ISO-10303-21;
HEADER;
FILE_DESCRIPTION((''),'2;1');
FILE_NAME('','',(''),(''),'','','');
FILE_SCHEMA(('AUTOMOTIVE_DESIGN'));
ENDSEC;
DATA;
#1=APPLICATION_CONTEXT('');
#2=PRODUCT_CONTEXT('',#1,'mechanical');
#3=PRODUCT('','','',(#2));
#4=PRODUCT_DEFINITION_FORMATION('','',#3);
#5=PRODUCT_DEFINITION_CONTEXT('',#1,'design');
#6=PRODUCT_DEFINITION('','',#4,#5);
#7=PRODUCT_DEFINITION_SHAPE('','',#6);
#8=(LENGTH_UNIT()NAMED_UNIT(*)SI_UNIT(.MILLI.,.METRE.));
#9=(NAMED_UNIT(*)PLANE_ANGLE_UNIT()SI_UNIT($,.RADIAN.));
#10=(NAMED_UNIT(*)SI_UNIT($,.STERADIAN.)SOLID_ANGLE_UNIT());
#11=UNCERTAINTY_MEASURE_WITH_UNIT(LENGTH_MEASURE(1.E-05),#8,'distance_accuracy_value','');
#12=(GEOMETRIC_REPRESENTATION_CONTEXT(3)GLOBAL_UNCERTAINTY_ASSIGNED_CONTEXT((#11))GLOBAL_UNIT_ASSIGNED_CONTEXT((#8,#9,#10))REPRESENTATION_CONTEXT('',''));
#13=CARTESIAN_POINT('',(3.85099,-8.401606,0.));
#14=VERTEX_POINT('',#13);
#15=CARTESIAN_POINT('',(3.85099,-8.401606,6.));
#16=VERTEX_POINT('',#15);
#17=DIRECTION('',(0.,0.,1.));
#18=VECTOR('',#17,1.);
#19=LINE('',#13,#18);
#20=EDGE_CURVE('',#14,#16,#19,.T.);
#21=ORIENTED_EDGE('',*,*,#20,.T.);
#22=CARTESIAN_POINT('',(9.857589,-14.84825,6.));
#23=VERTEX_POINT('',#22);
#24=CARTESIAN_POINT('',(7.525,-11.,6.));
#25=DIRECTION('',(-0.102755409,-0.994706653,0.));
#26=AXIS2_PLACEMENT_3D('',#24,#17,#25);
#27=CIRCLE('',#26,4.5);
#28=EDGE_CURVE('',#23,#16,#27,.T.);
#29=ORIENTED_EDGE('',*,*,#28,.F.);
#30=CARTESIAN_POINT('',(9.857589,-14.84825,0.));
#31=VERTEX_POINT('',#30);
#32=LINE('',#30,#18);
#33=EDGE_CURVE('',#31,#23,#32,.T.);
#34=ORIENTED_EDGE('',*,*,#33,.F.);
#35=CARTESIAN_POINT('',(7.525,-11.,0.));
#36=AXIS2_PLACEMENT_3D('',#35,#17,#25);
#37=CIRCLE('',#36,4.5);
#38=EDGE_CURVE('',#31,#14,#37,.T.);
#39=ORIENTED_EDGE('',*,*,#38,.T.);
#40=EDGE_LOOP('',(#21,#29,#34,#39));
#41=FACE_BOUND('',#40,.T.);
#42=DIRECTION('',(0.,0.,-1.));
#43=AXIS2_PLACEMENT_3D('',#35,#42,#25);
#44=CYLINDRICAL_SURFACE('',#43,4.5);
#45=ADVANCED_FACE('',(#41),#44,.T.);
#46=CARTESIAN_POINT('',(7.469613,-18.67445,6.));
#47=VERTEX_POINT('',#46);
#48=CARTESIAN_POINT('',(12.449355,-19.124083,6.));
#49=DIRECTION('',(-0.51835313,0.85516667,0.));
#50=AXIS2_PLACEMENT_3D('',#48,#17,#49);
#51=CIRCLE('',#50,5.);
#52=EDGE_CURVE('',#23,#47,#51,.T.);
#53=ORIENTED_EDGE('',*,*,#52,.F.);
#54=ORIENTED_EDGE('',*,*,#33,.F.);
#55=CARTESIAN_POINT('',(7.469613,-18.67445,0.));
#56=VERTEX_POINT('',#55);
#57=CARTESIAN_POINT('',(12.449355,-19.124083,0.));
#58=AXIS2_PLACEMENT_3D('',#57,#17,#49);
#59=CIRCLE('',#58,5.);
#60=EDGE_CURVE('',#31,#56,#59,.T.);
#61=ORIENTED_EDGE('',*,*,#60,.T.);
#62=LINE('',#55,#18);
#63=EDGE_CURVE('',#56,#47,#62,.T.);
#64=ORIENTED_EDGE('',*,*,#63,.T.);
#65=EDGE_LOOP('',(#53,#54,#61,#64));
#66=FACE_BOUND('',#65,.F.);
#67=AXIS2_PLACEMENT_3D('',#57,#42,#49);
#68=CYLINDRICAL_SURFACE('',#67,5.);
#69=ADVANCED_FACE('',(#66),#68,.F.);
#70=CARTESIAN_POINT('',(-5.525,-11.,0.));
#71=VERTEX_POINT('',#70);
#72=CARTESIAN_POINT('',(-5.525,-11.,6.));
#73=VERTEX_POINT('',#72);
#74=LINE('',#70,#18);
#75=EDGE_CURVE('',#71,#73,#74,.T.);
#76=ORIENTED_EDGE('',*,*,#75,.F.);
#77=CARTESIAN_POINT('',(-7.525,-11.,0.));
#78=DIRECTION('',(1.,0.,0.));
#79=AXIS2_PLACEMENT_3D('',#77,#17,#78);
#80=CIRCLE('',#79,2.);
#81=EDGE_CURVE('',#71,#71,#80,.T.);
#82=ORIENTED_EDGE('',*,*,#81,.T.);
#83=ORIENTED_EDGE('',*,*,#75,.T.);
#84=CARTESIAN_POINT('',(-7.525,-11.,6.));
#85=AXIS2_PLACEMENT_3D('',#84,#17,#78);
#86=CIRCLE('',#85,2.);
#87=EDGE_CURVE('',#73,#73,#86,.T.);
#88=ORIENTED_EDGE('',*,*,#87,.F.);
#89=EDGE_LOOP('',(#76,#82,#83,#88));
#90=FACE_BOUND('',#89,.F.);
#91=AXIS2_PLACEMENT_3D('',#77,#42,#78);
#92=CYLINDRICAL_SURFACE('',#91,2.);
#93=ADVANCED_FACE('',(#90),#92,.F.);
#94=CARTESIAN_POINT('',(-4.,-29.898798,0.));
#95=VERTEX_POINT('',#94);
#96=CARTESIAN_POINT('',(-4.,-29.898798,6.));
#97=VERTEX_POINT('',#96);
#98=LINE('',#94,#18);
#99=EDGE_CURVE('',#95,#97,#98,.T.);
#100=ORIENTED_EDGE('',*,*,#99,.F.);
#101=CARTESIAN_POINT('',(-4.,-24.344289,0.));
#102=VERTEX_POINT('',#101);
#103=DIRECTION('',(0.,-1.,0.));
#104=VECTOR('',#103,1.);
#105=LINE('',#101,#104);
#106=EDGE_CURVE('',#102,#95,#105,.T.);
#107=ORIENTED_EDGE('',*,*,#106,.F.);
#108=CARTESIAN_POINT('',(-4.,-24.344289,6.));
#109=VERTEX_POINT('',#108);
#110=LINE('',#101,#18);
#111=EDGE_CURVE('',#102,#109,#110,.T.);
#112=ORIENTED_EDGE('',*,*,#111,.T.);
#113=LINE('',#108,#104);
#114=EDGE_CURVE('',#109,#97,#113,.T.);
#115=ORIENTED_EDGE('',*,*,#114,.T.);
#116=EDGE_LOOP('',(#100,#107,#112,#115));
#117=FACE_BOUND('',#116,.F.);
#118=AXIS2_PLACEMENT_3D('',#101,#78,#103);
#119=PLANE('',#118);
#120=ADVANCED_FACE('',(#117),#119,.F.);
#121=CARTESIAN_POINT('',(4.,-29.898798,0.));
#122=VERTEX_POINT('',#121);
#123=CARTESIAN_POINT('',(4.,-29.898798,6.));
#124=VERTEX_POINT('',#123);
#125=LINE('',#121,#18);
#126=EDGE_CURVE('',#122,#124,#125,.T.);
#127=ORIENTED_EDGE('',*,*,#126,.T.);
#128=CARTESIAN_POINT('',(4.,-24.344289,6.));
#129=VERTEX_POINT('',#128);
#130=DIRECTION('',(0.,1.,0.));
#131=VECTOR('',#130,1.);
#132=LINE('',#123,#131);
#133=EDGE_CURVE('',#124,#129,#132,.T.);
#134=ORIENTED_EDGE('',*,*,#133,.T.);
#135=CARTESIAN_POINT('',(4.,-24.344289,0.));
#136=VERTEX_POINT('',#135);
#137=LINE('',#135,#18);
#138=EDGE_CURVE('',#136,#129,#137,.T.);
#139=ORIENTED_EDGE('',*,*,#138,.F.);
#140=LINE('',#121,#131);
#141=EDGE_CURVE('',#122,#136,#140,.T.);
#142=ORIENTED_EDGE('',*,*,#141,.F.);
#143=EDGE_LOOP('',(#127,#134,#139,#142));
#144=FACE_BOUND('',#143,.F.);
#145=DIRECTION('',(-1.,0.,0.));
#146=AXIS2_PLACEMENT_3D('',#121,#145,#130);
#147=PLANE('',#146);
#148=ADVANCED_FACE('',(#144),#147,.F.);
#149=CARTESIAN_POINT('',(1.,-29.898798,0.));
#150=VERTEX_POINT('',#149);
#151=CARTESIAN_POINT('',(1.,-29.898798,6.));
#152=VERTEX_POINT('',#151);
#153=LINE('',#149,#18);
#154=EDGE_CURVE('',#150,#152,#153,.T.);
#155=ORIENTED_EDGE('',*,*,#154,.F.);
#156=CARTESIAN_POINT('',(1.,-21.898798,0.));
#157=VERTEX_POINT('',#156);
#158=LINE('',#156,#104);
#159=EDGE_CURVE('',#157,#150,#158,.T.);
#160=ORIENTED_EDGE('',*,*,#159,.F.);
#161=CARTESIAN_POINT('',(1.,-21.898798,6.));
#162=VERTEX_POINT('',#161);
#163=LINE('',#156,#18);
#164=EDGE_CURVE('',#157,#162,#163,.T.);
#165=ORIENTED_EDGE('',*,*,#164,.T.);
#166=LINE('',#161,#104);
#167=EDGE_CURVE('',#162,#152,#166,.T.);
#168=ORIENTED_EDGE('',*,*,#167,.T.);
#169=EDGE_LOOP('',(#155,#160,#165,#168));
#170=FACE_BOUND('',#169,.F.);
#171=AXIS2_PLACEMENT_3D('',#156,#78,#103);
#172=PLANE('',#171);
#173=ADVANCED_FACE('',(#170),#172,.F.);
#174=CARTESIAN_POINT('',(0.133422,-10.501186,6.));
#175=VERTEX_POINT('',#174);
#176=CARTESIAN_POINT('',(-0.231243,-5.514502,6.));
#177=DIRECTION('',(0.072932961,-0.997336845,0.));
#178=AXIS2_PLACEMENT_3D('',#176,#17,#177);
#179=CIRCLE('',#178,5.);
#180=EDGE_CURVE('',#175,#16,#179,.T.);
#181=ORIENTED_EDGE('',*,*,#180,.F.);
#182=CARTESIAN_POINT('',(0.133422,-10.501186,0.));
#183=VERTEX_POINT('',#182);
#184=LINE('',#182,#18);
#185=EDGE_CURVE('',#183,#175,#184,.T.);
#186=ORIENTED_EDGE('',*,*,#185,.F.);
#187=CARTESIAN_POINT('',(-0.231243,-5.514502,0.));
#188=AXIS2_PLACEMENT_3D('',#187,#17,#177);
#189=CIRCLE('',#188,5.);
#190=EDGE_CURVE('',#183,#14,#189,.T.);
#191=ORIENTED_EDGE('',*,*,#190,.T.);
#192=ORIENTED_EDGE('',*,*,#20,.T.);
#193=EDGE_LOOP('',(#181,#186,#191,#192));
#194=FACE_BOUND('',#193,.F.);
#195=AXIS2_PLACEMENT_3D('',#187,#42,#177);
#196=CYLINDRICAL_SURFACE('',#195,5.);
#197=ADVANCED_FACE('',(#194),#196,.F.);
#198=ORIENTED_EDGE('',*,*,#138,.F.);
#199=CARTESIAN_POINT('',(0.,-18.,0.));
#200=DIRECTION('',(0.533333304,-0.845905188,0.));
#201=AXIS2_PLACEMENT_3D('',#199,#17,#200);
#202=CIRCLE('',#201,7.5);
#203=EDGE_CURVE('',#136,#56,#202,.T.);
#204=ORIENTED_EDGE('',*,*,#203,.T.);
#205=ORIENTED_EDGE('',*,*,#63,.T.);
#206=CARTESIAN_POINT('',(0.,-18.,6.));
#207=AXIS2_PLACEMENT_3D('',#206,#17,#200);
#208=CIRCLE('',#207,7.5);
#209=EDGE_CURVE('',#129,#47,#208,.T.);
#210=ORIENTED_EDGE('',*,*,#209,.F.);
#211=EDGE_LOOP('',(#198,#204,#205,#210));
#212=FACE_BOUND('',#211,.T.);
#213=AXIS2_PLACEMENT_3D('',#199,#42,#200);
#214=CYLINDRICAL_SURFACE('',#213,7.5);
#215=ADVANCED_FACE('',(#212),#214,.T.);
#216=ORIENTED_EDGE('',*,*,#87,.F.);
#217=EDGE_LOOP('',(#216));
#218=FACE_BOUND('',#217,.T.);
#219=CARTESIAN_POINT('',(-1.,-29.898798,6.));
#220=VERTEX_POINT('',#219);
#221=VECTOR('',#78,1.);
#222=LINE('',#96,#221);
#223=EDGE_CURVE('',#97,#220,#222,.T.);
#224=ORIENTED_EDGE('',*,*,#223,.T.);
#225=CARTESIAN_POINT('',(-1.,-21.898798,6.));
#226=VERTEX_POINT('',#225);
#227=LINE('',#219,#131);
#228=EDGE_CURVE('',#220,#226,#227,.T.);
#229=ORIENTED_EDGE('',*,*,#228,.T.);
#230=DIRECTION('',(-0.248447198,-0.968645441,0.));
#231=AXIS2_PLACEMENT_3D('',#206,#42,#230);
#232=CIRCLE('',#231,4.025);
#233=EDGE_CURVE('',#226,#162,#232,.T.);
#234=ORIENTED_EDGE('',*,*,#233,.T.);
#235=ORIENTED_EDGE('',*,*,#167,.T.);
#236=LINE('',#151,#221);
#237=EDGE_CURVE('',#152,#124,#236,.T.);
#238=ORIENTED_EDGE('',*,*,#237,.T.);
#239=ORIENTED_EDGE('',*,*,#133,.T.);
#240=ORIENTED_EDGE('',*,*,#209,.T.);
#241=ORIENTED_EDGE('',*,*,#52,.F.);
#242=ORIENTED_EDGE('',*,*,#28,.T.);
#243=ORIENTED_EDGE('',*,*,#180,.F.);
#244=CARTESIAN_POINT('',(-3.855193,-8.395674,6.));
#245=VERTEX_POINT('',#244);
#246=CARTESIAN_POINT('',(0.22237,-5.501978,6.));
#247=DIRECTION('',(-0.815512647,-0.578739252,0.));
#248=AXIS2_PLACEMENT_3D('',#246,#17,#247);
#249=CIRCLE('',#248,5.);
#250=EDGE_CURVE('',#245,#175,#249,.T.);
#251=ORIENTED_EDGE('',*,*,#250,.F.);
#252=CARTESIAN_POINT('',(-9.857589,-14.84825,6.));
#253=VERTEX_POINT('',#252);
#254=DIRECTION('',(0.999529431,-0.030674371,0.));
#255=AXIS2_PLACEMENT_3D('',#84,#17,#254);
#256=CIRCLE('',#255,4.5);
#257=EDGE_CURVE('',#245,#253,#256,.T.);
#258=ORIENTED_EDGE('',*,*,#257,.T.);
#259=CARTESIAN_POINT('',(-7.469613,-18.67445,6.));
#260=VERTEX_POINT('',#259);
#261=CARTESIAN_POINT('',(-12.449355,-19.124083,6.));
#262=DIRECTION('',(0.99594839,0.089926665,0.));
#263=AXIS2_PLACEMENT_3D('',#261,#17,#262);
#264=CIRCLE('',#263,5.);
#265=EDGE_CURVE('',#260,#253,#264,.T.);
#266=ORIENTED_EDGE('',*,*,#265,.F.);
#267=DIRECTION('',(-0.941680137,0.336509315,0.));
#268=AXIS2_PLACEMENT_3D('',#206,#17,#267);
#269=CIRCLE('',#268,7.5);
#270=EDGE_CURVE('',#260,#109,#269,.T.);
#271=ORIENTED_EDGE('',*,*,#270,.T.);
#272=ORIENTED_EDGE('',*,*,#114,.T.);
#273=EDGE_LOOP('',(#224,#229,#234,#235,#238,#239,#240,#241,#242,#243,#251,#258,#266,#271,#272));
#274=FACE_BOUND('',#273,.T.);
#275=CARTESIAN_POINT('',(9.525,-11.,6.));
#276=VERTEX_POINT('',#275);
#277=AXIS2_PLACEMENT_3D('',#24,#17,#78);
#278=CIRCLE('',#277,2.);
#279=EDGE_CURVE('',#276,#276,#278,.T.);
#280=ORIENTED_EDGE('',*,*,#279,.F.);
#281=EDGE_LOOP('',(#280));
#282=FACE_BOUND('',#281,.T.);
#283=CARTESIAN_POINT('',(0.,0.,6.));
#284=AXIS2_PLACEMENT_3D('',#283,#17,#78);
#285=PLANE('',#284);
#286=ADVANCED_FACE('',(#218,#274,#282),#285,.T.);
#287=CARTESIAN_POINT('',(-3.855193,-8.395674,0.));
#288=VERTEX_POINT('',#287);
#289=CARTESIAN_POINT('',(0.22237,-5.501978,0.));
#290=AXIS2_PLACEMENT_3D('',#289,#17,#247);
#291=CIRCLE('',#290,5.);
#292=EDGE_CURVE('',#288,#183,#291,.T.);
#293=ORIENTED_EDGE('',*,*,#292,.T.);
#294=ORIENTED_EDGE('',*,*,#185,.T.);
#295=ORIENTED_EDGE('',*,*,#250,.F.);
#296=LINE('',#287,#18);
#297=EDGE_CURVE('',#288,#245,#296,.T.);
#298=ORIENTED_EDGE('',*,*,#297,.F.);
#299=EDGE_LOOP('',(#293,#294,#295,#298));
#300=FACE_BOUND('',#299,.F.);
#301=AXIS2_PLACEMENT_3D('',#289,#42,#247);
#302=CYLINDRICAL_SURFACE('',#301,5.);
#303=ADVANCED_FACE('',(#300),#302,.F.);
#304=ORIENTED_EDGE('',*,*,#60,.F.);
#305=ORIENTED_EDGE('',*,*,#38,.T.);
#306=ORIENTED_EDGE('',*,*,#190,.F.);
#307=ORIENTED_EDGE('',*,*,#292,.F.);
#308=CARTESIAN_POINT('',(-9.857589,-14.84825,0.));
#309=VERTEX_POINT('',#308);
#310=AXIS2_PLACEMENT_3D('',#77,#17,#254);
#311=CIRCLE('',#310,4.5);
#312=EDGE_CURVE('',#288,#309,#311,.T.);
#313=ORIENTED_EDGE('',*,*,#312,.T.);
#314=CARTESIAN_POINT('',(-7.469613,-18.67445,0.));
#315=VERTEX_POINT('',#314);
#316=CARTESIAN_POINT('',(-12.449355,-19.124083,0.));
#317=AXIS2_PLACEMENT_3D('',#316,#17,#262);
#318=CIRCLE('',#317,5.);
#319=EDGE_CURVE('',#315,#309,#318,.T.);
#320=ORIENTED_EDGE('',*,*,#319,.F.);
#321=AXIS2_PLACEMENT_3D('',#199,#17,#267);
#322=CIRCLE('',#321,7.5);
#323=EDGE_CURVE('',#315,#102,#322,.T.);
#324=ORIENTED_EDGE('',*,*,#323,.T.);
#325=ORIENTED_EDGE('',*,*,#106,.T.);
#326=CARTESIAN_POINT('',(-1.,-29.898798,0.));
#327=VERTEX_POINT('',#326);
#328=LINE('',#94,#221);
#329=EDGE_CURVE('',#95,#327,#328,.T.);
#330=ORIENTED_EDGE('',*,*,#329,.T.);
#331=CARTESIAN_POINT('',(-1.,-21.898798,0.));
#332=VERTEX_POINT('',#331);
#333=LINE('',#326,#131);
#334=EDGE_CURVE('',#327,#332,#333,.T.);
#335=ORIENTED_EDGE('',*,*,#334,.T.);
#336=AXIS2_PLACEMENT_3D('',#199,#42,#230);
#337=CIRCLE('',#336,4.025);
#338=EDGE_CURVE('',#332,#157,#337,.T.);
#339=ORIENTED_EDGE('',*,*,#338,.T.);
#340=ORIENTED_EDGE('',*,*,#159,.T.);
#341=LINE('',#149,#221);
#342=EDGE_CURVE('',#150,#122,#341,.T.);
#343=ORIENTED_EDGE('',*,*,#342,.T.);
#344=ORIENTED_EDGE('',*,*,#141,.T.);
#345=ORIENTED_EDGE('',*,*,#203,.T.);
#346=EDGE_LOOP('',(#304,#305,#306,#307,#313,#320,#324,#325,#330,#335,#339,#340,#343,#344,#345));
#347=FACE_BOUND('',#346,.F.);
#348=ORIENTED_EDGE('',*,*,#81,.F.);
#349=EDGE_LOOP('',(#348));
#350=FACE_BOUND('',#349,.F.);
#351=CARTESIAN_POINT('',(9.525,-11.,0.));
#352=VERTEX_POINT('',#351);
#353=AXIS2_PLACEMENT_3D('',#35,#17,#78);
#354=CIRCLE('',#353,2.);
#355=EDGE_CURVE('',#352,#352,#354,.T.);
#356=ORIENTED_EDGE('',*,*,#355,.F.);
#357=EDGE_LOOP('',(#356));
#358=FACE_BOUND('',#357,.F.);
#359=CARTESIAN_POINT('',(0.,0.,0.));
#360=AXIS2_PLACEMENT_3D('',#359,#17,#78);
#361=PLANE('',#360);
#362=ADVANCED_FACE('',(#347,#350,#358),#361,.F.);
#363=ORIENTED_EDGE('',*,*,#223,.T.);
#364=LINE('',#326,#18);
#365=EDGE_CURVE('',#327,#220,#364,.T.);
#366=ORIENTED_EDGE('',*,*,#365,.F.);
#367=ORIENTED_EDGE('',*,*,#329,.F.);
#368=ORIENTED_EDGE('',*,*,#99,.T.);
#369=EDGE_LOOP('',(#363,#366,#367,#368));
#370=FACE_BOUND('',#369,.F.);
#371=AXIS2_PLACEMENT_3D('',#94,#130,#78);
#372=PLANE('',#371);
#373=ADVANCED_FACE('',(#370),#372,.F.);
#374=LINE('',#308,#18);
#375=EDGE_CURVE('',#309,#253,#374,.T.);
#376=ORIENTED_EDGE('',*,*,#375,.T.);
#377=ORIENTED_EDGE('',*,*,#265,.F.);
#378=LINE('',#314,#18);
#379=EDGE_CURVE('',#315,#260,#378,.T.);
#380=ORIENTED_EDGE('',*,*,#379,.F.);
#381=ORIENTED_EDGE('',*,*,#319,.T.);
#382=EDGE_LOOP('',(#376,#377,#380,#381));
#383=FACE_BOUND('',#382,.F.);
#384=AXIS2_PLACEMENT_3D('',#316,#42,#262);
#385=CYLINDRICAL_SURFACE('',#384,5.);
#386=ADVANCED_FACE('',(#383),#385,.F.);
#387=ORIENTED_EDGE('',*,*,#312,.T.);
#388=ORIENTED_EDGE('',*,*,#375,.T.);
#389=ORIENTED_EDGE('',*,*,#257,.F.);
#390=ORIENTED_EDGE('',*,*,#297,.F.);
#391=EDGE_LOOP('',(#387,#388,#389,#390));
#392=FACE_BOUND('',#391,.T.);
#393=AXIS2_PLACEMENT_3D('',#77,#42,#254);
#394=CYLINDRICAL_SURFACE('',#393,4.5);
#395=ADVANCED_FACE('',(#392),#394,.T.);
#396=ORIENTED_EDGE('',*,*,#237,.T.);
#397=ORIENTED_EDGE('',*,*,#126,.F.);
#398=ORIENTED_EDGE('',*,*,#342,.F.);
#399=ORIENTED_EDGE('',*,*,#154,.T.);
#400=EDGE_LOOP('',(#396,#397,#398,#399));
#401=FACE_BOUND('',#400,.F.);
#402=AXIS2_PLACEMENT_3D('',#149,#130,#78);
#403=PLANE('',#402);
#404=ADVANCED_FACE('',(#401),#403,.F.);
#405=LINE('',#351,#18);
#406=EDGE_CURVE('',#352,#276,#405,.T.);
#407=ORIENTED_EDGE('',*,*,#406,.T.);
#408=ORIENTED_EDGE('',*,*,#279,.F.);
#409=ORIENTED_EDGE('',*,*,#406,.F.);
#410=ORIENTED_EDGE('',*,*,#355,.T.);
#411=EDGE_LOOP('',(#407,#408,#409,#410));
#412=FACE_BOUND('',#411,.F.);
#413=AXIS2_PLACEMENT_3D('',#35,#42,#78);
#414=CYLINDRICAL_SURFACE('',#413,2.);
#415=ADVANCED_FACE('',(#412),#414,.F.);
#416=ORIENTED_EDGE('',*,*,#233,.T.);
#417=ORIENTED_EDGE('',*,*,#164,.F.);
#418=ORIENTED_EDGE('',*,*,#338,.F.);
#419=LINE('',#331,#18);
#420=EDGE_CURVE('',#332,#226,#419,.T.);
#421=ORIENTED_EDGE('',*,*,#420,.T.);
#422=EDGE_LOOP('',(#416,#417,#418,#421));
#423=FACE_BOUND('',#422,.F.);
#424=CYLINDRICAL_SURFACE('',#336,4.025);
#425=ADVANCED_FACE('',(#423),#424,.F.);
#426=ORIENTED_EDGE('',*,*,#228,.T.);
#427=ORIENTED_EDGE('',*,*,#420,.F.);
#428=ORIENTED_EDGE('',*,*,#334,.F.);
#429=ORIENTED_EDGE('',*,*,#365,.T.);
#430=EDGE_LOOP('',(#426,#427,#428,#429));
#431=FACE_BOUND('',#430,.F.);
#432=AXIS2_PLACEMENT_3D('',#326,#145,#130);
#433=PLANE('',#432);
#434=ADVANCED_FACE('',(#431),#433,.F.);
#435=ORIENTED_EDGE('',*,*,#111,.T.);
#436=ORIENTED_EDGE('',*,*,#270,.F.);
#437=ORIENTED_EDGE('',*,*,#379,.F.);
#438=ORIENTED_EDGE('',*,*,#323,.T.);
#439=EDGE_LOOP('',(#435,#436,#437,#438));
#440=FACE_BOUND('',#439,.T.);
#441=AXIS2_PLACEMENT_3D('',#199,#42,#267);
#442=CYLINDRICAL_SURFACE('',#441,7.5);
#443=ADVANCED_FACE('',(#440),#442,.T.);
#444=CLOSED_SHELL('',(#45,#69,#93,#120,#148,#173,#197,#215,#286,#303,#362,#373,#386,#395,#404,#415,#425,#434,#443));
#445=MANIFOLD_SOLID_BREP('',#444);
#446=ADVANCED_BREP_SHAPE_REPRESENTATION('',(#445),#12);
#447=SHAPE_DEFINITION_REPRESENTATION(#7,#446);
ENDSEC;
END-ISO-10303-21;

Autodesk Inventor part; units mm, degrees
ref_plane "YZ Plane" through (0, 0, 0) normal (1, 0, 0) x (0, 1, 0)
ref_plane "XZ Plane" through (0, 0, 0) normal (0, 1, 0) x (-1, 0, 0)
ref_plane "XY Plane" through (0, 0, 0) normal (0, 0, 1) x (1, 0, 0)
sketch "スケッチ1" plane through (0, 0, 0) normal (0, 0, 1) x (1, 0, 0)
  circle A0 centre (0, 0) radius 4.025
  arc A1 (6.725498, 2.029361) -> (-6.725498, 2.029361) centre (0, 0) ccw
  line L0 (0, -11) -> (0, -19) construction
  line L1 (-3.025, -11) -> (-3.025, -19)
  line L2 (3.025, -19) -> (3.025, -11)
  arc A2 (3.025, -11) -> (-3.025, -11) centre (0, -11) ccw
  arc A3 (-3.025, -19) -> (3.025, -19) centre (0, -19) ccw
  arc A4 (-5.235739, -21.981218) -> (5.235739, -21.981218) centre (0, -19) ccw
  circle A5 centre (-7.525, -11) radius 1.25
  circle A6 centre (7.525, -11) radius 1.25
  line L3 (-7.525, -11) -> (7.525, -11) construction
  arc A7 (-11.411415, -8.73157) -> (-10.923603, -13.949491) centre (-7.525, -11) ccw
  arc A8 (-11.411415, -8.73157) -> (-6.725498, 2.029361) centre (-54.593809, 16.473208) ccw
  arc A9 (6.725498, 2.029361) -> (11.411415, -8.73157) centre (54.593809, 16.473208) ccw
  arc A10 (-5.235739, -21.981218) -> (-10.923603, -13.949491) centre (-48.685856, -46.721617) ccw
  arc A11 (10.923603, -13.949491) -> (5.235739, -21.981218) centre (48.685856, -46.721617) ccw
  arc A12 (10.923603, -13.949491) -> (11.411415, -8.73157) centre (7.525, -11) ccw
  point P0 (0, -15)
  dimension "d0" = 8.05
  dimension "d1" = 3
  dimension "d2" = 8
  dimension "d3" = 6.05
  dimension "d4" = 19
  dimension "d5" = 2.5
  dimension "d6" = 2.5
  dimension "d7" = 9
  dimension "d8" = 100
  dimension "d9" = 100
  dimension "d10" = 50
  dimension "d11" = 50
  dimension "d12" = 4.5
  dimension "d13" = 3
sketch "スケッチ2" plane through (0, 0, 0) normal (0, 0, 1) x (1, 0, 0)
  circle A0 centre (-7.525, -11) radius 1.25 construction
  circle A1 centre (7.525, -11) radius 1.25 construction
  circle A2 centre (-7.525, -11) radius 2
  circle A3 centre (7.525, -11) radius 2
  arc A4 (-3.027118, -11.138035) -> (-7.062601, -15.47618) centre (-7.525, -11) ccw
  arc A5 (7.062601, -15.47618) -> (3.027118, -11.138035) centre (7.525, -11) ccw
  arc A6 (1, -21.898798) -> (-1, -21.898798) centre (0, -18) ccw
  line L0 (0, 0) -> (0, -18) construction
  line L1 (-1, -21.898798) -> (-1, -29.898798)
  line L2 (1, -21.898798) -> (1, -29.898798)
  line L3 (1, -29.898798) -> (4, -29.898798)
  line L4 (4, -29.898798) -> (4, -24.344289)
  line L5 (-1, -29.898798) -> (-4, -29.898798)
  line L6 (-4, -29.898798) -> (-4, -24.344289)
  arc A7 (-7.062601, -15.47618) -> (-4, -24.344289) centre (0, -18) ccw
  arc A8 (4, -24.344289) -> (7.062601, -15.47618) centre (0, -18) ccw
  arc A9 (3.027118, -11.138035) -> (-3.027118, -11.138035) centre (0, -18) ccw
  dimension "d14" = 4
  dimension "d15" = 4
  dimension "d16" = 9
  dimension "d17" = 9
  dimension "d18" = 8.05
  dimension "d19" = 18
  dimension "d20" = 8
  dimension "d21" = 8
  dimension "d22" = 2
  dimension "d23" = 1
  dimension "d24" = 3
  dimension "d25" = 3
  dimension "d27" = 7.5
  dimension "d28" = 7.5
  dimension "d29" = 7.5
sketch "スケッチ2 outline for 押し出し1" plane through (0, 0, 0) normal (0, 0, 1) x (1, 0, 0)
  line L0 (-1, -29.898798) -> (-1, -21.898798)
  line L1 (-4, -29.898798) -> (-1, -29.898798)
  arc A0 (-1, -21.898798) -> (1, -21.898798) centre (0, -18) cw
  line L2 (-4, -24.344289) -> (-4, -29.898798)
  line L3 (1, -21.898798) -> (1, -29.898798)
  arc A1 (-7.062601, -15.47618) -> (-4, -24.344289) centre (0, -18) ccw
  line L4 (1, -29.898798) -> (4, -29.898798)
  arc A2 (-3.027118, -11.138035) -> (-7.062601, -15.47618) centre (-7.525, -11) ccw
  line L5 (4, -29.898798) -> (4, -24.344289)
  arc A3 (3.027118, -11.138035) -> (-3.027118, -11.138035) centre (0, -18) ccw
  arc A4 (4, -24.344289) -> (7.062601, -15.47618) centre (0, -18) ccw
  arc A5 (7.062601, -15.47618) -> (3.027118, -11.138035) centre (7.525, -11) ccw
  circle A6 centre (-7.525, -11) radius 2
  circle A7 centre (7.525, -11) radius 2
extrude "押し出し1" add sketch "スケッチ2 outline for 押し出し1" along normal blind 6
fillet "フィレット1" radius 5 4 edges at (-3.0271, -11.138, 3) (3.0271, -11.138, 3) (7.0626, -15.4762, 3) (-7.0626, -15.4762, 3)
equation "\"d21\" = d20"
properties part number "横回転棒取り付けパーツ" material "アルミニウム 7075"
